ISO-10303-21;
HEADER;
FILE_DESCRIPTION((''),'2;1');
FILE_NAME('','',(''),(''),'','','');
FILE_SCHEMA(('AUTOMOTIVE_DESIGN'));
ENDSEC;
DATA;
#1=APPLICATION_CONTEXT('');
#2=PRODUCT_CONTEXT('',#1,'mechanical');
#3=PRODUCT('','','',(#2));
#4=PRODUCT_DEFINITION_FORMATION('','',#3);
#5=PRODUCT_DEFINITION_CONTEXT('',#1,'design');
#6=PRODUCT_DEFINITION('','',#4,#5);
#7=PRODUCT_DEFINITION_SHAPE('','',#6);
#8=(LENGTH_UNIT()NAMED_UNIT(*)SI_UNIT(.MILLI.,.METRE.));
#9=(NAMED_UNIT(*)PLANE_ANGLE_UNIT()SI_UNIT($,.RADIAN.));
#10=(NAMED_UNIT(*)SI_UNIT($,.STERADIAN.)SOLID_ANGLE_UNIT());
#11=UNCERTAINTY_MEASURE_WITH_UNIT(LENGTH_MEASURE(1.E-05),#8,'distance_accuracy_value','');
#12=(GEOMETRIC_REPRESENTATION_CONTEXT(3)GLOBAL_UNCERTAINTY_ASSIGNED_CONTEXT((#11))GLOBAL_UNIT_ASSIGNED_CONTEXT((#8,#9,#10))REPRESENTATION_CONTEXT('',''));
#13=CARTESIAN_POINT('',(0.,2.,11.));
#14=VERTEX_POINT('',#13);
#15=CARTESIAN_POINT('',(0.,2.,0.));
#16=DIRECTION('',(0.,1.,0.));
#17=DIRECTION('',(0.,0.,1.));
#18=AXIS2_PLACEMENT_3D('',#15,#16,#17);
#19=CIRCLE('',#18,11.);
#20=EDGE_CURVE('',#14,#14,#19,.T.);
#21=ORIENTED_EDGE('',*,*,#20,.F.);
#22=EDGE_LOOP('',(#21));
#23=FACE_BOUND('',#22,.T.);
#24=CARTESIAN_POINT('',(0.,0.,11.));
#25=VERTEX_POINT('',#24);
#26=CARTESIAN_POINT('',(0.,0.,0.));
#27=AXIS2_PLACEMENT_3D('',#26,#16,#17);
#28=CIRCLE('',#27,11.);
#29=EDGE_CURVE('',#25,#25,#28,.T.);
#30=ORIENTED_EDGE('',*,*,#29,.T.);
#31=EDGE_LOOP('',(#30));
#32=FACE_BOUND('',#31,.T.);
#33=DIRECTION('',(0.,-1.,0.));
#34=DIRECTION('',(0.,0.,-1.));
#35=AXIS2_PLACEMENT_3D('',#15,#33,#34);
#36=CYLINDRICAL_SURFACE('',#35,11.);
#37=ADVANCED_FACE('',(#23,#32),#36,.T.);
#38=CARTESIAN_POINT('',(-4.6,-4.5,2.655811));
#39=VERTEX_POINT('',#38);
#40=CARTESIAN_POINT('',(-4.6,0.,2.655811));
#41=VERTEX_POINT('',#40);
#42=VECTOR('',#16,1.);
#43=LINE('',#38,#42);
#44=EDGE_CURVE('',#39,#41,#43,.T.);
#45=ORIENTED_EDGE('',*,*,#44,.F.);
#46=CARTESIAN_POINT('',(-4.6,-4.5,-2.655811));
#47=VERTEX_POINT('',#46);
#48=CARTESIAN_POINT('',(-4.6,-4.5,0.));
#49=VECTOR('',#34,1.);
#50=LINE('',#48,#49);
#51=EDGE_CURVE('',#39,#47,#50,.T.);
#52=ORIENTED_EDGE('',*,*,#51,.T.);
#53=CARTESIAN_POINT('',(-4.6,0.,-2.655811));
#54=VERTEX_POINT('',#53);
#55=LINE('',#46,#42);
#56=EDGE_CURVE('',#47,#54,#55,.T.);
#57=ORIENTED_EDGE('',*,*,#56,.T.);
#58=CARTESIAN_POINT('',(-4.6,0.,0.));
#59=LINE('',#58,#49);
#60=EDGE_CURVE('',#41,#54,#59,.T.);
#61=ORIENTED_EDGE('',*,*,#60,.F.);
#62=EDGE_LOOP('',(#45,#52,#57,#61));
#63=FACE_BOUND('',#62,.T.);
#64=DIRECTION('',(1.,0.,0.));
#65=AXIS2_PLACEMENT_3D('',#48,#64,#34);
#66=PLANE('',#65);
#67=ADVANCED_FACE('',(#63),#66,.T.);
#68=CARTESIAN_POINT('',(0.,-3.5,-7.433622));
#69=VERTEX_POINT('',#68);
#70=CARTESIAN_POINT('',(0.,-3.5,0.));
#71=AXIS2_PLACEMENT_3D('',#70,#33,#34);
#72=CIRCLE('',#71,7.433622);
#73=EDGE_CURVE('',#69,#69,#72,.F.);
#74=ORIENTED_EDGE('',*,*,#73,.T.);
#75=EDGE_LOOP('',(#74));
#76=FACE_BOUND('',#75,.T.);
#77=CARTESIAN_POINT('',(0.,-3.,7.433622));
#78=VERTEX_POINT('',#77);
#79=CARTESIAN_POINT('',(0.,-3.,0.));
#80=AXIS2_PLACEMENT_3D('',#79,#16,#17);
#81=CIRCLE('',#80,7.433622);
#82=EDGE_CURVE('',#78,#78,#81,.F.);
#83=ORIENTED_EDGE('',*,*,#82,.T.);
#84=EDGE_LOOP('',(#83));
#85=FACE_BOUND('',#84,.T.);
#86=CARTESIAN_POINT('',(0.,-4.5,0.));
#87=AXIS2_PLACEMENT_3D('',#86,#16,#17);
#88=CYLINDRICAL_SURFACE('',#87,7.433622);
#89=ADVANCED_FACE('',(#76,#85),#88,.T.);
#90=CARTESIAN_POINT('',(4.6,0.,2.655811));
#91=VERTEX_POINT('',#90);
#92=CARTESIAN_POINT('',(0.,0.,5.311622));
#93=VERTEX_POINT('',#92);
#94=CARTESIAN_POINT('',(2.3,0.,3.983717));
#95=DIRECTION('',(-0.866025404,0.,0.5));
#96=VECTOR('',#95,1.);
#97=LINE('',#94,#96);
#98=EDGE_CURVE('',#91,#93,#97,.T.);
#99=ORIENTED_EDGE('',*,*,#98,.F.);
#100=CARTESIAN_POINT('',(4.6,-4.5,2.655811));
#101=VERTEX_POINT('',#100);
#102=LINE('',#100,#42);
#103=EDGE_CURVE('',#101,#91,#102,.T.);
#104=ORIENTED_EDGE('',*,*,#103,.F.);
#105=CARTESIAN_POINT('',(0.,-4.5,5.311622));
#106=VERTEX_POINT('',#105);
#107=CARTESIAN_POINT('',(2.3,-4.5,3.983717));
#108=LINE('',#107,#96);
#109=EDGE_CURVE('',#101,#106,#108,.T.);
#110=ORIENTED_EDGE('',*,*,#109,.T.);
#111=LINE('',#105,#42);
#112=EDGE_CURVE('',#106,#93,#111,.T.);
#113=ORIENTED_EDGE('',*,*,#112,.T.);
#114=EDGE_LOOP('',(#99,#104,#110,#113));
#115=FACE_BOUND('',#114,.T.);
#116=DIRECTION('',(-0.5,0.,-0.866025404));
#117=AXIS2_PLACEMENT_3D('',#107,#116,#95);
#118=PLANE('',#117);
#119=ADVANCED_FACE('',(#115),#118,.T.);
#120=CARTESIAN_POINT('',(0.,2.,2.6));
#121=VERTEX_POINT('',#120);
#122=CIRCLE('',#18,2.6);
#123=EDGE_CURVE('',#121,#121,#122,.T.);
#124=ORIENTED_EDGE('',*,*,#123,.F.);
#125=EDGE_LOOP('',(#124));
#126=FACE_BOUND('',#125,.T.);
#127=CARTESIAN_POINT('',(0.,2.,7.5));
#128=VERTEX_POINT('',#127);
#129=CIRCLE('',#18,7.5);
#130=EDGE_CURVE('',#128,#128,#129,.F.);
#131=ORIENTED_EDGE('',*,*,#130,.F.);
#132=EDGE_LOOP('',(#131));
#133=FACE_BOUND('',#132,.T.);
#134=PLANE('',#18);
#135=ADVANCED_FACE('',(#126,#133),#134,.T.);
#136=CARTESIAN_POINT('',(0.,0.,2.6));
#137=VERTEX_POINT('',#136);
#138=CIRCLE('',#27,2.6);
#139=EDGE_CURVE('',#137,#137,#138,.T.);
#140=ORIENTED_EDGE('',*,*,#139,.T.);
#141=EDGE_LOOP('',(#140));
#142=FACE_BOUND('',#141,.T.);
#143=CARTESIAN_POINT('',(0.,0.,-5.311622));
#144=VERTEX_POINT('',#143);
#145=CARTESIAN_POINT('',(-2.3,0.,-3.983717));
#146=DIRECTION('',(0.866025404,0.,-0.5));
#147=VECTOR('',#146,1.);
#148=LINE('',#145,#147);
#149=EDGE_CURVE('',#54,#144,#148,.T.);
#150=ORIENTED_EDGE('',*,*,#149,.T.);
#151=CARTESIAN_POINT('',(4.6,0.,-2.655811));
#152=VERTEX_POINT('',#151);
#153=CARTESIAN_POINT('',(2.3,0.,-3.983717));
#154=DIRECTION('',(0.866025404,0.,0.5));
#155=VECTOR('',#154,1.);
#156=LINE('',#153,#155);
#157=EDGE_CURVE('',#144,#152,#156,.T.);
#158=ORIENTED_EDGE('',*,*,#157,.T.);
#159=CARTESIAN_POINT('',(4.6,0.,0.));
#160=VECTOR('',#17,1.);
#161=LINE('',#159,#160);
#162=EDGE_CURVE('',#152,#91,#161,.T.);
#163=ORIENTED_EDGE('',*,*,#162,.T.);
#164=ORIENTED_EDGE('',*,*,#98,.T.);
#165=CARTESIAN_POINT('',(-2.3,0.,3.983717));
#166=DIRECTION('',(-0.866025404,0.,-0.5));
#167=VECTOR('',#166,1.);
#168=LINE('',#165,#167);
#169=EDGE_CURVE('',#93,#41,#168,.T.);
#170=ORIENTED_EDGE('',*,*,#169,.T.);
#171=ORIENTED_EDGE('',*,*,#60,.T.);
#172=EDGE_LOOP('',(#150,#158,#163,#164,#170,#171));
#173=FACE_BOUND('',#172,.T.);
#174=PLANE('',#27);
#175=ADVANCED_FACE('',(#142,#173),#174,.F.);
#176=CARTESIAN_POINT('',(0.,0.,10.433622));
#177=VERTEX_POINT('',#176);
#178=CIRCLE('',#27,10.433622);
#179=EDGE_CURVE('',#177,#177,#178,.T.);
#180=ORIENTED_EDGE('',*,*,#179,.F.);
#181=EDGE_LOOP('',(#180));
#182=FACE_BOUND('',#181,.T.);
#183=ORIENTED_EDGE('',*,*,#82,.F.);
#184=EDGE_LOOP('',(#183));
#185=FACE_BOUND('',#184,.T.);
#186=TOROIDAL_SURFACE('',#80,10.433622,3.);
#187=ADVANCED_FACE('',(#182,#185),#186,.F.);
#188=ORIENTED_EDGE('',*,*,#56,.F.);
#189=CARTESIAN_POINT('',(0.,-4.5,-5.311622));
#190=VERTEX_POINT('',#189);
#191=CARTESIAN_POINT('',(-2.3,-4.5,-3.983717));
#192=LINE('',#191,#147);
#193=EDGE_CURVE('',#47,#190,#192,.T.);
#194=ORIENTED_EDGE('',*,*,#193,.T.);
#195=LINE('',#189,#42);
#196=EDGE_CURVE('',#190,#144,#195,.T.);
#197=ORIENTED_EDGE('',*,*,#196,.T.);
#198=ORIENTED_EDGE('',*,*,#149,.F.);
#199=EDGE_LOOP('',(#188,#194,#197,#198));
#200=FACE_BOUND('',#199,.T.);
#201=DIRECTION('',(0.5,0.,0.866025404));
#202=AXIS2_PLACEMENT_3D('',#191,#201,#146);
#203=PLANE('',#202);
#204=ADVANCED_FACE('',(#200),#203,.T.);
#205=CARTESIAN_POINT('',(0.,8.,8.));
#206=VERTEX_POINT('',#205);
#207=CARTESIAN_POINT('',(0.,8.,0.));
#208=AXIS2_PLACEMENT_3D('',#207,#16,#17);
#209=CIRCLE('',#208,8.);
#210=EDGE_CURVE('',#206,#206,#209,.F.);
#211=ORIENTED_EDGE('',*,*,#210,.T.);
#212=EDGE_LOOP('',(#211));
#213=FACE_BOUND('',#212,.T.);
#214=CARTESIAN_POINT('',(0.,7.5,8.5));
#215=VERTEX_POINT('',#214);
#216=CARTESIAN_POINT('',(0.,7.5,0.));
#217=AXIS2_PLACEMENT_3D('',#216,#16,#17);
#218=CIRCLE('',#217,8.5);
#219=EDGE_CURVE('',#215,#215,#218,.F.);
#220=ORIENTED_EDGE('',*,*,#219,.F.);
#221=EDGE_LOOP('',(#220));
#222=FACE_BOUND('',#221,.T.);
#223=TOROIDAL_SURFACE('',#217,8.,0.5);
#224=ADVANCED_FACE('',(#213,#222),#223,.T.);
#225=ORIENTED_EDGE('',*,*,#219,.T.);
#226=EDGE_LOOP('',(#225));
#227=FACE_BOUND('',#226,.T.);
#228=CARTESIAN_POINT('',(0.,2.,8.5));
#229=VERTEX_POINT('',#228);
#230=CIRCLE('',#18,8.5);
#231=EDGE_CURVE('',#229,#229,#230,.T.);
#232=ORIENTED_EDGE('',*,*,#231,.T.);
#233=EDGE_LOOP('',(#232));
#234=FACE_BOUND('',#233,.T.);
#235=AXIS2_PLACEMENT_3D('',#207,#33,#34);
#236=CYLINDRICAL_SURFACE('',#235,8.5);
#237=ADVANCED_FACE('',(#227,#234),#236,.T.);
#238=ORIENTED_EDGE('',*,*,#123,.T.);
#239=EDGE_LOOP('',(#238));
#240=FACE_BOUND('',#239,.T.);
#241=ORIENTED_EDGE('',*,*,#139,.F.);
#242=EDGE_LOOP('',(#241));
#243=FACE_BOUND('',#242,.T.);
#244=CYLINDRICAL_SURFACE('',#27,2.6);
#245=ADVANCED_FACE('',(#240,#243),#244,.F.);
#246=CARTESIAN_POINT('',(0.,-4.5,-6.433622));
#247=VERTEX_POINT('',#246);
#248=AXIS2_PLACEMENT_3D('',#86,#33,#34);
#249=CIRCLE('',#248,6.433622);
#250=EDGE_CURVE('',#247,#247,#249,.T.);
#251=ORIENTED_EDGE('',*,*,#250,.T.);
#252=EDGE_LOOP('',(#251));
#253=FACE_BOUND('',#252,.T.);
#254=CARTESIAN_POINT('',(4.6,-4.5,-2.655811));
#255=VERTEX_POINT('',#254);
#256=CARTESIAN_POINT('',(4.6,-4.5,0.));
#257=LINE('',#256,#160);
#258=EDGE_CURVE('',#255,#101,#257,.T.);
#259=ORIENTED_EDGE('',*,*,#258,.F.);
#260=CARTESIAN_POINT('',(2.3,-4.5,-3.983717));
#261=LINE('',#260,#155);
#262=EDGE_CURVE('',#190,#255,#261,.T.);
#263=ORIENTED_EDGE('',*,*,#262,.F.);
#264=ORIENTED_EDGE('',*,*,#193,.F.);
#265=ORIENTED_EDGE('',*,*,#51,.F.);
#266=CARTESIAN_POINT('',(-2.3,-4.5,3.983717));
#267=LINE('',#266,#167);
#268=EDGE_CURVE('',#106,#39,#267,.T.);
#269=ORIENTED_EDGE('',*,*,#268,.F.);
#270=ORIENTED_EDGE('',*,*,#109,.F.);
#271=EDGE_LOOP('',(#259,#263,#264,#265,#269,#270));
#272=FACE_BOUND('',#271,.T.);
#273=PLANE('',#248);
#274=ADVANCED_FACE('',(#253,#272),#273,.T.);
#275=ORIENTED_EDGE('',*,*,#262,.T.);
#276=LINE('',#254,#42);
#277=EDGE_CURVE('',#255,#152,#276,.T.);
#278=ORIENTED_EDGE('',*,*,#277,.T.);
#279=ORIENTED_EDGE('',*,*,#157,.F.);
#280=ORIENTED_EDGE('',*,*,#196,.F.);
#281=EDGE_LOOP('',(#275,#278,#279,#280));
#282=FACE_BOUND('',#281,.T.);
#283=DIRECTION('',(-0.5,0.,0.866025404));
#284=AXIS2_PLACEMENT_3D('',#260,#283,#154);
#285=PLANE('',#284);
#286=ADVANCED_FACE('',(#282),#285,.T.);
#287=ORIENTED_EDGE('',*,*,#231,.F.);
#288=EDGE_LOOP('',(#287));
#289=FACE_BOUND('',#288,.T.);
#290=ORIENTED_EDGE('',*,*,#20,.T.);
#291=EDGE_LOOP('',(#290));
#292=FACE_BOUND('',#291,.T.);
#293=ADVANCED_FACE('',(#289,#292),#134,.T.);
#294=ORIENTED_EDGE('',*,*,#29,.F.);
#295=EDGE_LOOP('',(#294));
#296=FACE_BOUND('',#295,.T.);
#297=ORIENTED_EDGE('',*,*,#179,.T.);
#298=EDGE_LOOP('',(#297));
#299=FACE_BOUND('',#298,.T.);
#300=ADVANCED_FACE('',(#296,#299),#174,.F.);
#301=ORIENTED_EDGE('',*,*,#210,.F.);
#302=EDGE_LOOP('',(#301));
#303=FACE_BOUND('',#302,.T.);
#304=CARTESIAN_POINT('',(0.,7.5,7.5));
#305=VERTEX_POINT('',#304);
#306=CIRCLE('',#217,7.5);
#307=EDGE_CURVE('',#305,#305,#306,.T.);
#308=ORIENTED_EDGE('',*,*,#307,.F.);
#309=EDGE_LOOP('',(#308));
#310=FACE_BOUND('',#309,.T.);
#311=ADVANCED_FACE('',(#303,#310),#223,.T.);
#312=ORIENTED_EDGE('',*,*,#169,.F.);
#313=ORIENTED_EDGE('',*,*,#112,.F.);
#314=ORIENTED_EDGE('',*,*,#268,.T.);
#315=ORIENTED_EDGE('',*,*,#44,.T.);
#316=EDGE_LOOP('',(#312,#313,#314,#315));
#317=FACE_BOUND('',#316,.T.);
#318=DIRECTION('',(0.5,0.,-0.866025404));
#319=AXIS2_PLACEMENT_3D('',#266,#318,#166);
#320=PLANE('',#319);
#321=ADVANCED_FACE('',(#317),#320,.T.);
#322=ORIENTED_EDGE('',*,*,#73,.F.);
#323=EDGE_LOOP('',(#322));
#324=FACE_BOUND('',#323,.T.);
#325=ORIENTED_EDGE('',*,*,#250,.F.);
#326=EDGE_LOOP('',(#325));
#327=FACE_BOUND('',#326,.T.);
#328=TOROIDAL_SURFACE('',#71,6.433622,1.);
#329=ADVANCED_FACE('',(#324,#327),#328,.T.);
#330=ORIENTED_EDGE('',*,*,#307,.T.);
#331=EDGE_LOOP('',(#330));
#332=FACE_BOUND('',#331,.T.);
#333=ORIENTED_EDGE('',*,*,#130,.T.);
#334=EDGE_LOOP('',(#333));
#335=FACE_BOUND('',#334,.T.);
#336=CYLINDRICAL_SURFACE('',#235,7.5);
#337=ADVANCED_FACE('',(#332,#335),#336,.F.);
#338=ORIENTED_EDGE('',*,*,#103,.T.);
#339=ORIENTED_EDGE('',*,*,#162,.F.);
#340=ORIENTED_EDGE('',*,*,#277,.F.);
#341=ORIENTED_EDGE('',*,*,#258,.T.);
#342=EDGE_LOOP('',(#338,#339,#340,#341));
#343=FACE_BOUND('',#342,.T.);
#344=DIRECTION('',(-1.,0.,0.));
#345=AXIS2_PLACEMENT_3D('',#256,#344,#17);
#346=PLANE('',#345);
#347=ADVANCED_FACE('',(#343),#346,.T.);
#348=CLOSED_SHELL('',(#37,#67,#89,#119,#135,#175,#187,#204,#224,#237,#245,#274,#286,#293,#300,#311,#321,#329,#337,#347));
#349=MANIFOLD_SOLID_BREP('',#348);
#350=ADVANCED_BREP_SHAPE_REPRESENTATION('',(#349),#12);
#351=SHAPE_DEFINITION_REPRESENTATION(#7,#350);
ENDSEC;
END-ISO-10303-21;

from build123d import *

# Parameters (mm, degrees)
SKETCH1_R           = 11
BOSS_EXTRUDE1_DEPTH = 2
SKETCH2_R           = 8.5
SKETCH2_R_2         = 7.5
BOSS_EXTRUDE2_DEPTH = 6
SKETCH3_R           = 2.6
CUT_EXTRUDE1_DEPTH  = 17.673332001
SKETCH4_R           = 7.43362206
BOSS_EXTRUDE3_DEPTH = 4.5
FILLET1_R           = 3
FILLET2_R           = 1
FILLET3_R           = 0.5


with BuildPart() as part:
    # Sketch1 → Boss-Extrude1 (new body)
    with BuildSketch(Plane(origin=(0, 0, 0), x_dir=(1, 0, 0), z_dir=(0, 1, 0))):
        with Locations(Location((0, 0, 0), (0, 0, 270))):
            Circle(SKETCH1_R)
    extrude(amount=BOSS_EXTRUDE1_DEPTH)

    # Sketch2 → Boss-Extrude2 (add)
    with BuildSketch(Plane(origin=(0, 2, 0), x_dir=(1, 0, 0), z_dir=(0, 1, 0))):
        with Locations(Location((0, 0, 0), (0, 0, 270))):
            Circle(SKETCH2_R)
        with Locations(Location((0, 0, 0), (0, 0, 270))):
            Circle(SKETCH2_R_2, mode=Mode.SUBTRACT)
    extrude(amount=BOSS_EXTRUDE2_DEPTH)

    # Sketch3 → Cut-Extrude1 (cut, through all)
    with BuildSketch(Plane(origin=(0, 2, 0), x_dir=(1, 0, 0), z_dir=(0, 1, 0))):
        with Locations(Location((0, 0, 0), (0, 0, 270))):
            Circle(SKETCH3_R)
    extrude(amount=-CUT_EXTRUDE1_DEPTH, mode=Mode.SUBTRACT)

    # Sketch4 → Boss-Extrude3 (add)
    with BuildSketch(Plane.XZ):
        with Locations(Location((0, 0, 0), (0, 0, 270))):
            Circle(SKETCH4_R)
        Polygon((0, -5.311622477), (4.6, -2.655811238), (4.6, 2.655811238), (0, 5.311622477), (-4.6, 2.655811238), (-4.6, -2.655811238), align=None, mode=Mode.SUBTRACT)
    extrude(amount=BOSS_EXTRUDE3_DEPTH)

    # Fillet1
    fillet1_edges = [part.edges().sort_by_distance(p)[0] for p in [
        (0, 0, 7.43362206),
    ]]
    fillet(fillet1_edges, radius=FILLET1_R)

    # Fillet2
    fillet2_edges = [part.edges().sort_by_distance(p)[0] for p in [
        (0, -4.5, 7.43362206),
    ]]
    fillet(fillet2_edges, radius=FILLET2_R)

    # Fillet3
    fillet3_edges = [part.edges().sort_by_distance(p)[0] for p in [
        (0, 8, -8.5),
        (0, 8, -7.5),
    ]]
    fillet(fillet3_edges, radius=FILLET3_R - 0.0001)  # a hair under: the kernel refuses the full size


solid = part.part
